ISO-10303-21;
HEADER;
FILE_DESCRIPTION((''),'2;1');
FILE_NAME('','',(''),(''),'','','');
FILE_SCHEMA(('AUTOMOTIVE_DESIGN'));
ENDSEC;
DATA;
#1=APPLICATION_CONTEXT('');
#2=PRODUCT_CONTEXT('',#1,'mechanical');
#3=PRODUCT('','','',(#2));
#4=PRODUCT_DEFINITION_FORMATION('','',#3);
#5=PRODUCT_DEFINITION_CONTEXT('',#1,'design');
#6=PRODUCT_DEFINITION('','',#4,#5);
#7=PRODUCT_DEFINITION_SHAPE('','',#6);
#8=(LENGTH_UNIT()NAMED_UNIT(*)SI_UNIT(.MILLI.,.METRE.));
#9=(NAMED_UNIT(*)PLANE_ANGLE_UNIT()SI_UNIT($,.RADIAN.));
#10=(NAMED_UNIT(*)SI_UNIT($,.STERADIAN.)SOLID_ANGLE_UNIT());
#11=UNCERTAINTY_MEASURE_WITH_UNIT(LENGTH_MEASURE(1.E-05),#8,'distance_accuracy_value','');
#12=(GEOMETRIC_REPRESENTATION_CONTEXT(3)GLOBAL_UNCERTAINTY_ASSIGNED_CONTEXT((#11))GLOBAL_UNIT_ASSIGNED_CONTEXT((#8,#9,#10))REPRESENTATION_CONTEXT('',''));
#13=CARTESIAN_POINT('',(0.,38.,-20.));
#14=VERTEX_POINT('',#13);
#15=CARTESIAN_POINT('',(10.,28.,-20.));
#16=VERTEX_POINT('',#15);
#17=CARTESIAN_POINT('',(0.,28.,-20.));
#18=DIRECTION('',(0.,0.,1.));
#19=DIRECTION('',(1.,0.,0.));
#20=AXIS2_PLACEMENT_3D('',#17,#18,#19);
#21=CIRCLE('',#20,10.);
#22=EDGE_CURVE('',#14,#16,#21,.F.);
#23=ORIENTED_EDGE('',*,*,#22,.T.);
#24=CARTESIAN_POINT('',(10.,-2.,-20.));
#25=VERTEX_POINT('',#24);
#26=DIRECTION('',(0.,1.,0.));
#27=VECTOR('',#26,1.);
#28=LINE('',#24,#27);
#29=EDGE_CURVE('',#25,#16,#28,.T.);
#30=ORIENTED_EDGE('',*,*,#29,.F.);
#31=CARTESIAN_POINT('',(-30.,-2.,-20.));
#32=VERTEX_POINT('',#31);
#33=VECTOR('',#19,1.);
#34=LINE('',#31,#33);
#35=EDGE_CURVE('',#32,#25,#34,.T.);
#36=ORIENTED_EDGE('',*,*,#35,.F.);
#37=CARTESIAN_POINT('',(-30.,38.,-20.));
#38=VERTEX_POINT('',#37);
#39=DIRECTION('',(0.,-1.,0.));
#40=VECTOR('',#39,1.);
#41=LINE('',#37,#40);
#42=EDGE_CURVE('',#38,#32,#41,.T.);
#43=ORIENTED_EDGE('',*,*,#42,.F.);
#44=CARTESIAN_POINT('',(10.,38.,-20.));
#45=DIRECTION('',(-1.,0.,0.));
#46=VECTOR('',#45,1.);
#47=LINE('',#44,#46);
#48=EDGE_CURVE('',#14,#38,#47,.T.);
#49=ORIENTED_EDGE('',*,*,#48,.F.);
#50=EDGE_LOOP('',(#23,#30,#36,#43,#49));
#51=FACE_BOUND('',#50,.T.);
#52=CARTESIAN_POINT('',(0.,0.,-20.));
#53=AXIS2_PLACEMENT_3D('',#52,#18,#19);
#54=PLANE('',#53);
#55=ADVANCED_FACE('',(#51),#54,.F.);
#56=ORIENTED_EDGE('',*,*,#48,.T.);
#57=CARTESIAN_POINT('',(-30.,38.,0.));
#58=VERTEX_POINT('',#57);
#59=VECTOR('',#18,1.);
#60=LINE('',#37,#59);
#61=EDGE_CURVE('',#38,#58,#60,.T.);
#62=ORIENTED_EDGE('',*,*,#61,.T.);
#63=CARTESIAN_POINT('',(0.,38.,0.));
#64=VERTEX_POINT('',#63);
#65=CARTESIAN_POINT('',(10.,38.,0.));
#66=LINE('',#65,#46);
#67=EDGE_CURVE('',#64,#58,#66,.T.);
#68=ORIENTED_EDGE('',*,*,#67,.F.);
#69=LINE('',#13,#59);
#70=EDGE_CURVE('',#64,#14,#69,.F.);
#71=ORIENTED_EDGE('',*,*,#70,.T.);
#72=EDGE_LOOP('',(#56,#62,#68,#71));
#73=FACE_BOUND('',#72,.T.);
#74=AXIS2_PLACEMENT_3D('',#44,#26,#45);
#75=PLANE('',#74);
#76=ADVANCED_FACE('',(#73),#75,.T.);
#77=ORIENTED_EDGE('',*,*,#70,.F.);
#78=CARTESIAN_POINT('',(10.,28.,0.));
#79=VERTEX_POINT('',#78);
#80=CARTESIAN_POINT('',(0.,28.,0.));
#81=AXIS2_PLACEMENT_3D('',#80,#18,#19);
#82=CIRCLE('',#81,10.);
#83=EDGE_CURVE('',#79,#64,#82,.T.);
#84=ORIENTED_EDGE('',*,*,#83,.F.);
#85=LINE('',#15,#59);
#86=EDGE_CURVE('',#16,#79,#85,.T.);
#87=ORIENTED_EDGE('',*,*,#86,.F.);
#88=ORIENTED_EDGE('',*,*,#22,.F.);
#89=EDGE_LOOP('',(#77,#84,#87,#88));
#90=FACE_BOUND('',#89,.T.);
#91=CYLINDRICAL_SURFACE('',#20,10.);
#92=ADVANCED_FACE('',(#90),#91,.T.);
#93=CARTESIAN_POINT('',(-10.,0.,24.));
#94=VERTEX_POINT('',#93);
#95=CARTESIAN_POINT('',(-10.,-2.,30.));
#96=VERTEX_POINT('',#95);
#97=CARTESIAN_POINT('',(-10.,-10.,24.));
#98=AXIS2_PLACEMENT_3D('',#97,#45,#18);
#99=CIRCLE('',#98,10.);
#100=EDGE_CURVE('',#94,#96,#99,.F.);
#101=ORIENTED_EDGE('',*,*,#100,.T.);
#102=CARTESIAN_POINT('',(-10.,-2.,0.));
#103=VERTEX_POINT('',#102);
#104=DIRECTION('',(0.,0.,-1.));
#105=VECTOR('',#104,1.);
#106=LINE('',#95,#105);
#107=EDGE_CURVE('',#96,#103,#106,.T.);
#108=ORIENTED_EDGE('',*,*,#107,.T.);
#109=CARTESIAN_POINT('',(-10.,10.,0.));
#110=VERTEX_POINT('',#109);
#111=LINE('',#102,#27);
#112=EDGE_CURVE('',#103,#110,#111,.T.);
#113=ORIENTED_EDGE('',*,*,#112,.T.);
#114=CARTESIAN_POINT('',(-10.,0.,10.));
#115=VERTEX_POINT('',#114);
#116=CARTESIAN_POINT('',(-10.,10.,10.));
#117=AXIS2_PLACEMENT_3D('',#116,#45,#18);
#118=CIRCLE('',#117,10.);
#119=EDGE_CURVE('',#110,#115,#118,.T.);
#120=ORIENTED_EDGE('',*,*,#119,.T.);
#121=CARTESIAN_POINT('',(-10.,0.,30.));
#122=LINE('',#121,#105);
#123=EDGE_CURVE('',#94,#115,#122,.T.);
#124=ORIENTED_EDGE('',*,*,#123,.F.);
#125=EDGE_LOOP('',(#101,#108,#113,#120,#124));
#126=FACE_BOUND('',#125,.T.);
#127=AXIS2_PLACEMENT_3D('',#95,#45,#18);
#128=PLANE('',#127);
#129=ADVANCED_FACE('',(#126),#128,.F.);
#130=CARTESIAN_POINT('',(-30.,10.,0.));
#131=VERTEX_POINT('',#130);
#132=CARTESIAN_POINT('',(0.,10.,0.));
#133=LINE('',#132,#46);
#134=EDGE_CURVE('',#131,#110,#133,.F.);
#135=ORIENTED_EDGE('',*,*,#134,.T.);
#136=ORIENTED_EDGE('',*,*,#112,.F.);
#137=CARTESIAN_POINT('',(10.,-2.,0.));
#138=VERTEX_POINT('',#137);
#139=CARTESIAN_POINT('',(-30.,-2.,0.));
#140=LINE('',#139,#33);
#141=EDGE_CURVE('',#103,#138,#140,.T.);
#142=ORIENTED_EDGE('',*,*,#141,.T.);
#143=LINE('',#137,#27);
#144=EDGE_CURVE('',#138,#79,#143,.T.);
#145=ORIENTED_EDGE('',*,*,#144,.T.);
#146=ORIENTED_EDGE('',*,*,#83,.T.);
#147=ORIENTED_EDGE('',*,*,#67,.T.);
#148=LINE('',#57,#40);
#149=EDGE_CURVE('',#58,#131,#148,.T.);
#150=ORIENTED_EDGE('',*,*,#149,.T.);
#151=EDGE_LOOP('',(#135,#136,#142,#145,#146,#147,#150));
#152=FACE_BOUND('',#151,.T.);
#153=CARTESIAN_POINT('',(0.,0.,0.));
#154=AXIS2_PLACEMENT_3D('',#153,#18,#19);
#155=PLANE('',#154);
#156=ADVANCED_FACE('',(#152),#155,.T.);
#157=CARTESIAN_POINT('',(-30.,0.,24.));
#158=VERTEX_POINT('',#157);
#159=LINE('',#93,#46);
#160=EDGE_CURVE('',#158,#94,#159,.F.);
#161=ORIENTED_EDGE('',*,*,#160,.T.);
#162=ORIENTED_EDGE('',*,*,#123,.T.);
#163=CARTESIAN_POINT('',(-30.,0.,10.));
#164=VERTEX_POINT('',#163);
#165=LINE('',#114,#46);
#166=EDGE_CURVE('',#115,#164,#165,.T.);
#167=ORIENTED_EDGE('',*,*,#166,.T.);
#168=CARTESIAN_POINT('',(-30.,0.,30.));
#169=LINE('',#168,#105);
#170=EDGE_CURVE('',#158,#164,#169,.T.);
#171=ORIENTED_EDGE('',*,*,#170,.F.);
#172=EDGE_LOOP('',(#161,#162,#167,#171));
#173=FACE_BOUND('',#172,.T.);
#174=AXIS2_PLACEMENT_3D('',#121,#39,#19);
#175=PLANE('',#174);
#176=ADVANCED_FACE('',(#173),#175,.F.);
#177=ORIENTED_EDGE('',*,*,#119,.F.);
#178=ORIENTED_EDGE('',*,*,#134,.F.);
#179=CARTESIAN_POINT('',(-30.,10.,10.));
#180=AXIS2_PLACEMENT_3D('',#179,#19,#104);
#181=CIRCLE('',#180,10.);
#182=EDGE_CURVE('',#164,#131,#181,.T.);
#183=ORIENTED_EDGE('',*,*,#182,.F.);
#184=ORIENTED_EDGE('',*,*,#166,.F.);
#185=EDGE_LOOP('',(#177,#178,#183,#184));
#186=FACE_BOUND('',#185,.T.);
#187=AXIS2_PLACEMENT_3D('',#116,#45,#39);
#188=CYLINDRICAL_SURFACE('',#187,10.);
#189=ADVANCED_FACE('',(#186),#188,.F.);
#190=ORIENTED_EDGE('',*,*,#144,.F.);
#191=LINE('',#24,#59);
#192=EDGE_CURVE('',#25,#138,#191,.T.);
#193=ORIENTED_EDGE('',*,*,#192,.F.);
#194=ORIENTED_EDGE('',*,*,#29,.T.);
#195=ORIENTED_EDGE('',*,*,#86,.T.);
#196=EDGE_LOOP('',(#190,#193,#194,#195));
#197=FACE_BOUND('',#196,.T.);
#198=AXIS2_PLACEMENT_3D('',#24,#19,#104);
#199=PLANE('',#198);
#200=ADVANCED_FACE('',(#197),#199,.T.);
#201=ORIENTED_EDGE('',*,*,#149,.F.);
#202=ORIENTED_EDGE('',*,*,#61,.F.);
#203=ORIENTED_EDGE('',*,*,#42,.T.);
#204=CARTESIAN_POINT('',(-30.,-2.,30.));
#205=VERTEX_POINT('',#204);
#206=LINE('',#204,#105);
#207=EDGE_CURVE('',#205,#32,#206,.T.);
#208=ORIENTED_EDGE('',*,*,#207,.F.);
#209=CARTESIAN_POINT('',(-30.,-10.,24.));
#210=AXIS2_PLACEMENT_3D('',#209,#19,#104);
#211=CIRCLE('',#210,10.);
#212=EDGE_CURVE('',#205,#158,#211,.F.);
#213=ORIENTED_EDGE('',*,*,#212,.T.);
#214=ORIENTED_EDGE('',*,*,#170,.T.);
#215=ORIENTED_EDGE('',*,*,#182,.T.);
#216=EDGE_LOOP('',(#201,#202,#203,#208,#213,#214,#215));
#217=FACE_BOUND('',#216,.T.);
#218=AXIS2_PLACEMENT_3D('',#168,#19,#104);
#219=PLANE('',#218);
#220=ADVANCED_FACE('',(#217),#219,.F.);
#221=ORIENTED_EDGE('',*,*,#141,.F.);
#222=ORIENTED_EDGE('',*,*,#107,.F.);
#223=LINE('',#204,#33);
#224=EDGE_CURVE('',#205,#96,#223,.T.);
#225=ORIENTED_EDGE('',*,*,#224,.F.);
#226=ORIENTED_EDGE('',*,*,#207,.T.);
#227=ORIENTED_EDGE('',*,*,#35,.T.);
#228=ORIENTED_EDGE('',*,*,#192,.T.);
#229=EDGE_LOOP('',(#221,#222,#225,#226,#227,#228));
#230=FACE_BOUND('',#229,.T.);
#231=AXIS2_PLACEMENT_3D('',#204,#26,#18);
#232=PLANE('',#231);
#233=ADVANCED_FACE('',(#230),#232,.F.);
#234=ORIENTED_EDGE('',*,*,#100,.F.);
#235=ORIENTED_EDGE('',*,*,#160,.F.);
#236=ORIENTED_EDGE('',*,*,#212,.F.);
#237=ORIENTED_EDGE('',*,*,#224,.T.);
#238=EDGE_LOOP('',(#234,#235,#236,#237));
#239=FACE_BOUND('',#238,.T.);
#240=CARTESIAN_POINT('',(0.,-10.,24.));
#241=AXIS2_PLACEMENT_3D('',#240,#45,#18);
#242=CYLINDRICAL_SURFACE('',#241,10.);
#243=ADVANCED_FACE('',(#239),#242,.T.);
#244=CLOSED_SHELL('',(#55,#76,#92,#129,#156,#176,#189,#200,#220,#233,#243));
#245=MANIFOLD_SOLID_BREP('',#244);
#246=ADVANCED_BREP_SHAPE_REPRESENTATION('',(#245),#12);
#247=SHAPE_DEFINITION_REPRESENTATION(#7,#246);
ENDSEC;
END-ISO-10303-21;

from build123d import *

# Parameters (mm, degrees)
SKETCH1_W           = 20
SKETCH1_H           = 2
BOSS_EXTRUDE1_DEPTH = 30
SKETCH2_W           = 40
SKETCH2_H           = 40
BOSS_EXTRUDE2_DEPTH = 20
FILLET1_R           = 10


with BuildPart() as part:
    # Sketch1 → Boss-Extrude1 (new body)
    with BuildSketch(Plane.XY):
        with Locations((-20, -1)):
            Rectangle(SKETCH1_W, SKETCH1_H)
    extrude(amount=BOSS_EXTRUDE1_DEPTH)

    # Sketch2 → Boss-Extrude2 (add)
    with BuildSketch(Plane.XY):
        with Locations((-10, 18)):
            Rectangle(SKETCH2_W, SKETCH2_H)
    extrude(amount=-BOSS_EXTRUDE2_DEPTH)

    # Fillet1
    # the kernel refuses this fillet: 10 mm, written as the material it adds along each edge
    with BuildSketch(Plane(origin=(-10, 0, 0), x_dir=(0, 1, 0), z_dir=(-1, 0, 0))) as fillet1_piece_1:
        with BuildLine():
            CenterArc((FILLET1_R, -FILLET1_R), FILLET1_R, 90, 90)
            Line((0, -FILLET1_R), (0, 0))
            Line((0, 0), (FILLET1_R, 0))
        make_face()
    extrude(amount=20)
    # the kernel refuses this fillet: 10 mm, written as the material it takes off along each edge
    with BuildSketch(Plane(origin=(10, 38, 25), x_dir=(-1, 0, 0), z_dir=(0, 0, -1))) as fillet1_2_piece_1:
        with BuildLine():
            CenterArc((FILLET1_R, -FILLET1_R), FILLET1_R, 90, 90)
            Line((0, -FILLET1_R), (0, 0))
            Line((0, 0), (FILLET1_R, 0))
        make_face()
    extrude(amount=70, mode=Mode.SUBTRACT)
    with BuildSketch(Plane(origin=(5, 0, 30), x_dir=(0, 0, -1), z_dir=(-1, 0, 0))) as fillet1_2_piece_2:
        with BuildLine():
            CenterArc((6, 10), FILLET1_R, 233.130102354, 36.869897646)
            Line((0, 2), (0, 0))
            Line((0, 0), (6, 0))
        make_face()
    extrude(amount=50, mode=Mode.SUBTRACT)


solid = part.part
